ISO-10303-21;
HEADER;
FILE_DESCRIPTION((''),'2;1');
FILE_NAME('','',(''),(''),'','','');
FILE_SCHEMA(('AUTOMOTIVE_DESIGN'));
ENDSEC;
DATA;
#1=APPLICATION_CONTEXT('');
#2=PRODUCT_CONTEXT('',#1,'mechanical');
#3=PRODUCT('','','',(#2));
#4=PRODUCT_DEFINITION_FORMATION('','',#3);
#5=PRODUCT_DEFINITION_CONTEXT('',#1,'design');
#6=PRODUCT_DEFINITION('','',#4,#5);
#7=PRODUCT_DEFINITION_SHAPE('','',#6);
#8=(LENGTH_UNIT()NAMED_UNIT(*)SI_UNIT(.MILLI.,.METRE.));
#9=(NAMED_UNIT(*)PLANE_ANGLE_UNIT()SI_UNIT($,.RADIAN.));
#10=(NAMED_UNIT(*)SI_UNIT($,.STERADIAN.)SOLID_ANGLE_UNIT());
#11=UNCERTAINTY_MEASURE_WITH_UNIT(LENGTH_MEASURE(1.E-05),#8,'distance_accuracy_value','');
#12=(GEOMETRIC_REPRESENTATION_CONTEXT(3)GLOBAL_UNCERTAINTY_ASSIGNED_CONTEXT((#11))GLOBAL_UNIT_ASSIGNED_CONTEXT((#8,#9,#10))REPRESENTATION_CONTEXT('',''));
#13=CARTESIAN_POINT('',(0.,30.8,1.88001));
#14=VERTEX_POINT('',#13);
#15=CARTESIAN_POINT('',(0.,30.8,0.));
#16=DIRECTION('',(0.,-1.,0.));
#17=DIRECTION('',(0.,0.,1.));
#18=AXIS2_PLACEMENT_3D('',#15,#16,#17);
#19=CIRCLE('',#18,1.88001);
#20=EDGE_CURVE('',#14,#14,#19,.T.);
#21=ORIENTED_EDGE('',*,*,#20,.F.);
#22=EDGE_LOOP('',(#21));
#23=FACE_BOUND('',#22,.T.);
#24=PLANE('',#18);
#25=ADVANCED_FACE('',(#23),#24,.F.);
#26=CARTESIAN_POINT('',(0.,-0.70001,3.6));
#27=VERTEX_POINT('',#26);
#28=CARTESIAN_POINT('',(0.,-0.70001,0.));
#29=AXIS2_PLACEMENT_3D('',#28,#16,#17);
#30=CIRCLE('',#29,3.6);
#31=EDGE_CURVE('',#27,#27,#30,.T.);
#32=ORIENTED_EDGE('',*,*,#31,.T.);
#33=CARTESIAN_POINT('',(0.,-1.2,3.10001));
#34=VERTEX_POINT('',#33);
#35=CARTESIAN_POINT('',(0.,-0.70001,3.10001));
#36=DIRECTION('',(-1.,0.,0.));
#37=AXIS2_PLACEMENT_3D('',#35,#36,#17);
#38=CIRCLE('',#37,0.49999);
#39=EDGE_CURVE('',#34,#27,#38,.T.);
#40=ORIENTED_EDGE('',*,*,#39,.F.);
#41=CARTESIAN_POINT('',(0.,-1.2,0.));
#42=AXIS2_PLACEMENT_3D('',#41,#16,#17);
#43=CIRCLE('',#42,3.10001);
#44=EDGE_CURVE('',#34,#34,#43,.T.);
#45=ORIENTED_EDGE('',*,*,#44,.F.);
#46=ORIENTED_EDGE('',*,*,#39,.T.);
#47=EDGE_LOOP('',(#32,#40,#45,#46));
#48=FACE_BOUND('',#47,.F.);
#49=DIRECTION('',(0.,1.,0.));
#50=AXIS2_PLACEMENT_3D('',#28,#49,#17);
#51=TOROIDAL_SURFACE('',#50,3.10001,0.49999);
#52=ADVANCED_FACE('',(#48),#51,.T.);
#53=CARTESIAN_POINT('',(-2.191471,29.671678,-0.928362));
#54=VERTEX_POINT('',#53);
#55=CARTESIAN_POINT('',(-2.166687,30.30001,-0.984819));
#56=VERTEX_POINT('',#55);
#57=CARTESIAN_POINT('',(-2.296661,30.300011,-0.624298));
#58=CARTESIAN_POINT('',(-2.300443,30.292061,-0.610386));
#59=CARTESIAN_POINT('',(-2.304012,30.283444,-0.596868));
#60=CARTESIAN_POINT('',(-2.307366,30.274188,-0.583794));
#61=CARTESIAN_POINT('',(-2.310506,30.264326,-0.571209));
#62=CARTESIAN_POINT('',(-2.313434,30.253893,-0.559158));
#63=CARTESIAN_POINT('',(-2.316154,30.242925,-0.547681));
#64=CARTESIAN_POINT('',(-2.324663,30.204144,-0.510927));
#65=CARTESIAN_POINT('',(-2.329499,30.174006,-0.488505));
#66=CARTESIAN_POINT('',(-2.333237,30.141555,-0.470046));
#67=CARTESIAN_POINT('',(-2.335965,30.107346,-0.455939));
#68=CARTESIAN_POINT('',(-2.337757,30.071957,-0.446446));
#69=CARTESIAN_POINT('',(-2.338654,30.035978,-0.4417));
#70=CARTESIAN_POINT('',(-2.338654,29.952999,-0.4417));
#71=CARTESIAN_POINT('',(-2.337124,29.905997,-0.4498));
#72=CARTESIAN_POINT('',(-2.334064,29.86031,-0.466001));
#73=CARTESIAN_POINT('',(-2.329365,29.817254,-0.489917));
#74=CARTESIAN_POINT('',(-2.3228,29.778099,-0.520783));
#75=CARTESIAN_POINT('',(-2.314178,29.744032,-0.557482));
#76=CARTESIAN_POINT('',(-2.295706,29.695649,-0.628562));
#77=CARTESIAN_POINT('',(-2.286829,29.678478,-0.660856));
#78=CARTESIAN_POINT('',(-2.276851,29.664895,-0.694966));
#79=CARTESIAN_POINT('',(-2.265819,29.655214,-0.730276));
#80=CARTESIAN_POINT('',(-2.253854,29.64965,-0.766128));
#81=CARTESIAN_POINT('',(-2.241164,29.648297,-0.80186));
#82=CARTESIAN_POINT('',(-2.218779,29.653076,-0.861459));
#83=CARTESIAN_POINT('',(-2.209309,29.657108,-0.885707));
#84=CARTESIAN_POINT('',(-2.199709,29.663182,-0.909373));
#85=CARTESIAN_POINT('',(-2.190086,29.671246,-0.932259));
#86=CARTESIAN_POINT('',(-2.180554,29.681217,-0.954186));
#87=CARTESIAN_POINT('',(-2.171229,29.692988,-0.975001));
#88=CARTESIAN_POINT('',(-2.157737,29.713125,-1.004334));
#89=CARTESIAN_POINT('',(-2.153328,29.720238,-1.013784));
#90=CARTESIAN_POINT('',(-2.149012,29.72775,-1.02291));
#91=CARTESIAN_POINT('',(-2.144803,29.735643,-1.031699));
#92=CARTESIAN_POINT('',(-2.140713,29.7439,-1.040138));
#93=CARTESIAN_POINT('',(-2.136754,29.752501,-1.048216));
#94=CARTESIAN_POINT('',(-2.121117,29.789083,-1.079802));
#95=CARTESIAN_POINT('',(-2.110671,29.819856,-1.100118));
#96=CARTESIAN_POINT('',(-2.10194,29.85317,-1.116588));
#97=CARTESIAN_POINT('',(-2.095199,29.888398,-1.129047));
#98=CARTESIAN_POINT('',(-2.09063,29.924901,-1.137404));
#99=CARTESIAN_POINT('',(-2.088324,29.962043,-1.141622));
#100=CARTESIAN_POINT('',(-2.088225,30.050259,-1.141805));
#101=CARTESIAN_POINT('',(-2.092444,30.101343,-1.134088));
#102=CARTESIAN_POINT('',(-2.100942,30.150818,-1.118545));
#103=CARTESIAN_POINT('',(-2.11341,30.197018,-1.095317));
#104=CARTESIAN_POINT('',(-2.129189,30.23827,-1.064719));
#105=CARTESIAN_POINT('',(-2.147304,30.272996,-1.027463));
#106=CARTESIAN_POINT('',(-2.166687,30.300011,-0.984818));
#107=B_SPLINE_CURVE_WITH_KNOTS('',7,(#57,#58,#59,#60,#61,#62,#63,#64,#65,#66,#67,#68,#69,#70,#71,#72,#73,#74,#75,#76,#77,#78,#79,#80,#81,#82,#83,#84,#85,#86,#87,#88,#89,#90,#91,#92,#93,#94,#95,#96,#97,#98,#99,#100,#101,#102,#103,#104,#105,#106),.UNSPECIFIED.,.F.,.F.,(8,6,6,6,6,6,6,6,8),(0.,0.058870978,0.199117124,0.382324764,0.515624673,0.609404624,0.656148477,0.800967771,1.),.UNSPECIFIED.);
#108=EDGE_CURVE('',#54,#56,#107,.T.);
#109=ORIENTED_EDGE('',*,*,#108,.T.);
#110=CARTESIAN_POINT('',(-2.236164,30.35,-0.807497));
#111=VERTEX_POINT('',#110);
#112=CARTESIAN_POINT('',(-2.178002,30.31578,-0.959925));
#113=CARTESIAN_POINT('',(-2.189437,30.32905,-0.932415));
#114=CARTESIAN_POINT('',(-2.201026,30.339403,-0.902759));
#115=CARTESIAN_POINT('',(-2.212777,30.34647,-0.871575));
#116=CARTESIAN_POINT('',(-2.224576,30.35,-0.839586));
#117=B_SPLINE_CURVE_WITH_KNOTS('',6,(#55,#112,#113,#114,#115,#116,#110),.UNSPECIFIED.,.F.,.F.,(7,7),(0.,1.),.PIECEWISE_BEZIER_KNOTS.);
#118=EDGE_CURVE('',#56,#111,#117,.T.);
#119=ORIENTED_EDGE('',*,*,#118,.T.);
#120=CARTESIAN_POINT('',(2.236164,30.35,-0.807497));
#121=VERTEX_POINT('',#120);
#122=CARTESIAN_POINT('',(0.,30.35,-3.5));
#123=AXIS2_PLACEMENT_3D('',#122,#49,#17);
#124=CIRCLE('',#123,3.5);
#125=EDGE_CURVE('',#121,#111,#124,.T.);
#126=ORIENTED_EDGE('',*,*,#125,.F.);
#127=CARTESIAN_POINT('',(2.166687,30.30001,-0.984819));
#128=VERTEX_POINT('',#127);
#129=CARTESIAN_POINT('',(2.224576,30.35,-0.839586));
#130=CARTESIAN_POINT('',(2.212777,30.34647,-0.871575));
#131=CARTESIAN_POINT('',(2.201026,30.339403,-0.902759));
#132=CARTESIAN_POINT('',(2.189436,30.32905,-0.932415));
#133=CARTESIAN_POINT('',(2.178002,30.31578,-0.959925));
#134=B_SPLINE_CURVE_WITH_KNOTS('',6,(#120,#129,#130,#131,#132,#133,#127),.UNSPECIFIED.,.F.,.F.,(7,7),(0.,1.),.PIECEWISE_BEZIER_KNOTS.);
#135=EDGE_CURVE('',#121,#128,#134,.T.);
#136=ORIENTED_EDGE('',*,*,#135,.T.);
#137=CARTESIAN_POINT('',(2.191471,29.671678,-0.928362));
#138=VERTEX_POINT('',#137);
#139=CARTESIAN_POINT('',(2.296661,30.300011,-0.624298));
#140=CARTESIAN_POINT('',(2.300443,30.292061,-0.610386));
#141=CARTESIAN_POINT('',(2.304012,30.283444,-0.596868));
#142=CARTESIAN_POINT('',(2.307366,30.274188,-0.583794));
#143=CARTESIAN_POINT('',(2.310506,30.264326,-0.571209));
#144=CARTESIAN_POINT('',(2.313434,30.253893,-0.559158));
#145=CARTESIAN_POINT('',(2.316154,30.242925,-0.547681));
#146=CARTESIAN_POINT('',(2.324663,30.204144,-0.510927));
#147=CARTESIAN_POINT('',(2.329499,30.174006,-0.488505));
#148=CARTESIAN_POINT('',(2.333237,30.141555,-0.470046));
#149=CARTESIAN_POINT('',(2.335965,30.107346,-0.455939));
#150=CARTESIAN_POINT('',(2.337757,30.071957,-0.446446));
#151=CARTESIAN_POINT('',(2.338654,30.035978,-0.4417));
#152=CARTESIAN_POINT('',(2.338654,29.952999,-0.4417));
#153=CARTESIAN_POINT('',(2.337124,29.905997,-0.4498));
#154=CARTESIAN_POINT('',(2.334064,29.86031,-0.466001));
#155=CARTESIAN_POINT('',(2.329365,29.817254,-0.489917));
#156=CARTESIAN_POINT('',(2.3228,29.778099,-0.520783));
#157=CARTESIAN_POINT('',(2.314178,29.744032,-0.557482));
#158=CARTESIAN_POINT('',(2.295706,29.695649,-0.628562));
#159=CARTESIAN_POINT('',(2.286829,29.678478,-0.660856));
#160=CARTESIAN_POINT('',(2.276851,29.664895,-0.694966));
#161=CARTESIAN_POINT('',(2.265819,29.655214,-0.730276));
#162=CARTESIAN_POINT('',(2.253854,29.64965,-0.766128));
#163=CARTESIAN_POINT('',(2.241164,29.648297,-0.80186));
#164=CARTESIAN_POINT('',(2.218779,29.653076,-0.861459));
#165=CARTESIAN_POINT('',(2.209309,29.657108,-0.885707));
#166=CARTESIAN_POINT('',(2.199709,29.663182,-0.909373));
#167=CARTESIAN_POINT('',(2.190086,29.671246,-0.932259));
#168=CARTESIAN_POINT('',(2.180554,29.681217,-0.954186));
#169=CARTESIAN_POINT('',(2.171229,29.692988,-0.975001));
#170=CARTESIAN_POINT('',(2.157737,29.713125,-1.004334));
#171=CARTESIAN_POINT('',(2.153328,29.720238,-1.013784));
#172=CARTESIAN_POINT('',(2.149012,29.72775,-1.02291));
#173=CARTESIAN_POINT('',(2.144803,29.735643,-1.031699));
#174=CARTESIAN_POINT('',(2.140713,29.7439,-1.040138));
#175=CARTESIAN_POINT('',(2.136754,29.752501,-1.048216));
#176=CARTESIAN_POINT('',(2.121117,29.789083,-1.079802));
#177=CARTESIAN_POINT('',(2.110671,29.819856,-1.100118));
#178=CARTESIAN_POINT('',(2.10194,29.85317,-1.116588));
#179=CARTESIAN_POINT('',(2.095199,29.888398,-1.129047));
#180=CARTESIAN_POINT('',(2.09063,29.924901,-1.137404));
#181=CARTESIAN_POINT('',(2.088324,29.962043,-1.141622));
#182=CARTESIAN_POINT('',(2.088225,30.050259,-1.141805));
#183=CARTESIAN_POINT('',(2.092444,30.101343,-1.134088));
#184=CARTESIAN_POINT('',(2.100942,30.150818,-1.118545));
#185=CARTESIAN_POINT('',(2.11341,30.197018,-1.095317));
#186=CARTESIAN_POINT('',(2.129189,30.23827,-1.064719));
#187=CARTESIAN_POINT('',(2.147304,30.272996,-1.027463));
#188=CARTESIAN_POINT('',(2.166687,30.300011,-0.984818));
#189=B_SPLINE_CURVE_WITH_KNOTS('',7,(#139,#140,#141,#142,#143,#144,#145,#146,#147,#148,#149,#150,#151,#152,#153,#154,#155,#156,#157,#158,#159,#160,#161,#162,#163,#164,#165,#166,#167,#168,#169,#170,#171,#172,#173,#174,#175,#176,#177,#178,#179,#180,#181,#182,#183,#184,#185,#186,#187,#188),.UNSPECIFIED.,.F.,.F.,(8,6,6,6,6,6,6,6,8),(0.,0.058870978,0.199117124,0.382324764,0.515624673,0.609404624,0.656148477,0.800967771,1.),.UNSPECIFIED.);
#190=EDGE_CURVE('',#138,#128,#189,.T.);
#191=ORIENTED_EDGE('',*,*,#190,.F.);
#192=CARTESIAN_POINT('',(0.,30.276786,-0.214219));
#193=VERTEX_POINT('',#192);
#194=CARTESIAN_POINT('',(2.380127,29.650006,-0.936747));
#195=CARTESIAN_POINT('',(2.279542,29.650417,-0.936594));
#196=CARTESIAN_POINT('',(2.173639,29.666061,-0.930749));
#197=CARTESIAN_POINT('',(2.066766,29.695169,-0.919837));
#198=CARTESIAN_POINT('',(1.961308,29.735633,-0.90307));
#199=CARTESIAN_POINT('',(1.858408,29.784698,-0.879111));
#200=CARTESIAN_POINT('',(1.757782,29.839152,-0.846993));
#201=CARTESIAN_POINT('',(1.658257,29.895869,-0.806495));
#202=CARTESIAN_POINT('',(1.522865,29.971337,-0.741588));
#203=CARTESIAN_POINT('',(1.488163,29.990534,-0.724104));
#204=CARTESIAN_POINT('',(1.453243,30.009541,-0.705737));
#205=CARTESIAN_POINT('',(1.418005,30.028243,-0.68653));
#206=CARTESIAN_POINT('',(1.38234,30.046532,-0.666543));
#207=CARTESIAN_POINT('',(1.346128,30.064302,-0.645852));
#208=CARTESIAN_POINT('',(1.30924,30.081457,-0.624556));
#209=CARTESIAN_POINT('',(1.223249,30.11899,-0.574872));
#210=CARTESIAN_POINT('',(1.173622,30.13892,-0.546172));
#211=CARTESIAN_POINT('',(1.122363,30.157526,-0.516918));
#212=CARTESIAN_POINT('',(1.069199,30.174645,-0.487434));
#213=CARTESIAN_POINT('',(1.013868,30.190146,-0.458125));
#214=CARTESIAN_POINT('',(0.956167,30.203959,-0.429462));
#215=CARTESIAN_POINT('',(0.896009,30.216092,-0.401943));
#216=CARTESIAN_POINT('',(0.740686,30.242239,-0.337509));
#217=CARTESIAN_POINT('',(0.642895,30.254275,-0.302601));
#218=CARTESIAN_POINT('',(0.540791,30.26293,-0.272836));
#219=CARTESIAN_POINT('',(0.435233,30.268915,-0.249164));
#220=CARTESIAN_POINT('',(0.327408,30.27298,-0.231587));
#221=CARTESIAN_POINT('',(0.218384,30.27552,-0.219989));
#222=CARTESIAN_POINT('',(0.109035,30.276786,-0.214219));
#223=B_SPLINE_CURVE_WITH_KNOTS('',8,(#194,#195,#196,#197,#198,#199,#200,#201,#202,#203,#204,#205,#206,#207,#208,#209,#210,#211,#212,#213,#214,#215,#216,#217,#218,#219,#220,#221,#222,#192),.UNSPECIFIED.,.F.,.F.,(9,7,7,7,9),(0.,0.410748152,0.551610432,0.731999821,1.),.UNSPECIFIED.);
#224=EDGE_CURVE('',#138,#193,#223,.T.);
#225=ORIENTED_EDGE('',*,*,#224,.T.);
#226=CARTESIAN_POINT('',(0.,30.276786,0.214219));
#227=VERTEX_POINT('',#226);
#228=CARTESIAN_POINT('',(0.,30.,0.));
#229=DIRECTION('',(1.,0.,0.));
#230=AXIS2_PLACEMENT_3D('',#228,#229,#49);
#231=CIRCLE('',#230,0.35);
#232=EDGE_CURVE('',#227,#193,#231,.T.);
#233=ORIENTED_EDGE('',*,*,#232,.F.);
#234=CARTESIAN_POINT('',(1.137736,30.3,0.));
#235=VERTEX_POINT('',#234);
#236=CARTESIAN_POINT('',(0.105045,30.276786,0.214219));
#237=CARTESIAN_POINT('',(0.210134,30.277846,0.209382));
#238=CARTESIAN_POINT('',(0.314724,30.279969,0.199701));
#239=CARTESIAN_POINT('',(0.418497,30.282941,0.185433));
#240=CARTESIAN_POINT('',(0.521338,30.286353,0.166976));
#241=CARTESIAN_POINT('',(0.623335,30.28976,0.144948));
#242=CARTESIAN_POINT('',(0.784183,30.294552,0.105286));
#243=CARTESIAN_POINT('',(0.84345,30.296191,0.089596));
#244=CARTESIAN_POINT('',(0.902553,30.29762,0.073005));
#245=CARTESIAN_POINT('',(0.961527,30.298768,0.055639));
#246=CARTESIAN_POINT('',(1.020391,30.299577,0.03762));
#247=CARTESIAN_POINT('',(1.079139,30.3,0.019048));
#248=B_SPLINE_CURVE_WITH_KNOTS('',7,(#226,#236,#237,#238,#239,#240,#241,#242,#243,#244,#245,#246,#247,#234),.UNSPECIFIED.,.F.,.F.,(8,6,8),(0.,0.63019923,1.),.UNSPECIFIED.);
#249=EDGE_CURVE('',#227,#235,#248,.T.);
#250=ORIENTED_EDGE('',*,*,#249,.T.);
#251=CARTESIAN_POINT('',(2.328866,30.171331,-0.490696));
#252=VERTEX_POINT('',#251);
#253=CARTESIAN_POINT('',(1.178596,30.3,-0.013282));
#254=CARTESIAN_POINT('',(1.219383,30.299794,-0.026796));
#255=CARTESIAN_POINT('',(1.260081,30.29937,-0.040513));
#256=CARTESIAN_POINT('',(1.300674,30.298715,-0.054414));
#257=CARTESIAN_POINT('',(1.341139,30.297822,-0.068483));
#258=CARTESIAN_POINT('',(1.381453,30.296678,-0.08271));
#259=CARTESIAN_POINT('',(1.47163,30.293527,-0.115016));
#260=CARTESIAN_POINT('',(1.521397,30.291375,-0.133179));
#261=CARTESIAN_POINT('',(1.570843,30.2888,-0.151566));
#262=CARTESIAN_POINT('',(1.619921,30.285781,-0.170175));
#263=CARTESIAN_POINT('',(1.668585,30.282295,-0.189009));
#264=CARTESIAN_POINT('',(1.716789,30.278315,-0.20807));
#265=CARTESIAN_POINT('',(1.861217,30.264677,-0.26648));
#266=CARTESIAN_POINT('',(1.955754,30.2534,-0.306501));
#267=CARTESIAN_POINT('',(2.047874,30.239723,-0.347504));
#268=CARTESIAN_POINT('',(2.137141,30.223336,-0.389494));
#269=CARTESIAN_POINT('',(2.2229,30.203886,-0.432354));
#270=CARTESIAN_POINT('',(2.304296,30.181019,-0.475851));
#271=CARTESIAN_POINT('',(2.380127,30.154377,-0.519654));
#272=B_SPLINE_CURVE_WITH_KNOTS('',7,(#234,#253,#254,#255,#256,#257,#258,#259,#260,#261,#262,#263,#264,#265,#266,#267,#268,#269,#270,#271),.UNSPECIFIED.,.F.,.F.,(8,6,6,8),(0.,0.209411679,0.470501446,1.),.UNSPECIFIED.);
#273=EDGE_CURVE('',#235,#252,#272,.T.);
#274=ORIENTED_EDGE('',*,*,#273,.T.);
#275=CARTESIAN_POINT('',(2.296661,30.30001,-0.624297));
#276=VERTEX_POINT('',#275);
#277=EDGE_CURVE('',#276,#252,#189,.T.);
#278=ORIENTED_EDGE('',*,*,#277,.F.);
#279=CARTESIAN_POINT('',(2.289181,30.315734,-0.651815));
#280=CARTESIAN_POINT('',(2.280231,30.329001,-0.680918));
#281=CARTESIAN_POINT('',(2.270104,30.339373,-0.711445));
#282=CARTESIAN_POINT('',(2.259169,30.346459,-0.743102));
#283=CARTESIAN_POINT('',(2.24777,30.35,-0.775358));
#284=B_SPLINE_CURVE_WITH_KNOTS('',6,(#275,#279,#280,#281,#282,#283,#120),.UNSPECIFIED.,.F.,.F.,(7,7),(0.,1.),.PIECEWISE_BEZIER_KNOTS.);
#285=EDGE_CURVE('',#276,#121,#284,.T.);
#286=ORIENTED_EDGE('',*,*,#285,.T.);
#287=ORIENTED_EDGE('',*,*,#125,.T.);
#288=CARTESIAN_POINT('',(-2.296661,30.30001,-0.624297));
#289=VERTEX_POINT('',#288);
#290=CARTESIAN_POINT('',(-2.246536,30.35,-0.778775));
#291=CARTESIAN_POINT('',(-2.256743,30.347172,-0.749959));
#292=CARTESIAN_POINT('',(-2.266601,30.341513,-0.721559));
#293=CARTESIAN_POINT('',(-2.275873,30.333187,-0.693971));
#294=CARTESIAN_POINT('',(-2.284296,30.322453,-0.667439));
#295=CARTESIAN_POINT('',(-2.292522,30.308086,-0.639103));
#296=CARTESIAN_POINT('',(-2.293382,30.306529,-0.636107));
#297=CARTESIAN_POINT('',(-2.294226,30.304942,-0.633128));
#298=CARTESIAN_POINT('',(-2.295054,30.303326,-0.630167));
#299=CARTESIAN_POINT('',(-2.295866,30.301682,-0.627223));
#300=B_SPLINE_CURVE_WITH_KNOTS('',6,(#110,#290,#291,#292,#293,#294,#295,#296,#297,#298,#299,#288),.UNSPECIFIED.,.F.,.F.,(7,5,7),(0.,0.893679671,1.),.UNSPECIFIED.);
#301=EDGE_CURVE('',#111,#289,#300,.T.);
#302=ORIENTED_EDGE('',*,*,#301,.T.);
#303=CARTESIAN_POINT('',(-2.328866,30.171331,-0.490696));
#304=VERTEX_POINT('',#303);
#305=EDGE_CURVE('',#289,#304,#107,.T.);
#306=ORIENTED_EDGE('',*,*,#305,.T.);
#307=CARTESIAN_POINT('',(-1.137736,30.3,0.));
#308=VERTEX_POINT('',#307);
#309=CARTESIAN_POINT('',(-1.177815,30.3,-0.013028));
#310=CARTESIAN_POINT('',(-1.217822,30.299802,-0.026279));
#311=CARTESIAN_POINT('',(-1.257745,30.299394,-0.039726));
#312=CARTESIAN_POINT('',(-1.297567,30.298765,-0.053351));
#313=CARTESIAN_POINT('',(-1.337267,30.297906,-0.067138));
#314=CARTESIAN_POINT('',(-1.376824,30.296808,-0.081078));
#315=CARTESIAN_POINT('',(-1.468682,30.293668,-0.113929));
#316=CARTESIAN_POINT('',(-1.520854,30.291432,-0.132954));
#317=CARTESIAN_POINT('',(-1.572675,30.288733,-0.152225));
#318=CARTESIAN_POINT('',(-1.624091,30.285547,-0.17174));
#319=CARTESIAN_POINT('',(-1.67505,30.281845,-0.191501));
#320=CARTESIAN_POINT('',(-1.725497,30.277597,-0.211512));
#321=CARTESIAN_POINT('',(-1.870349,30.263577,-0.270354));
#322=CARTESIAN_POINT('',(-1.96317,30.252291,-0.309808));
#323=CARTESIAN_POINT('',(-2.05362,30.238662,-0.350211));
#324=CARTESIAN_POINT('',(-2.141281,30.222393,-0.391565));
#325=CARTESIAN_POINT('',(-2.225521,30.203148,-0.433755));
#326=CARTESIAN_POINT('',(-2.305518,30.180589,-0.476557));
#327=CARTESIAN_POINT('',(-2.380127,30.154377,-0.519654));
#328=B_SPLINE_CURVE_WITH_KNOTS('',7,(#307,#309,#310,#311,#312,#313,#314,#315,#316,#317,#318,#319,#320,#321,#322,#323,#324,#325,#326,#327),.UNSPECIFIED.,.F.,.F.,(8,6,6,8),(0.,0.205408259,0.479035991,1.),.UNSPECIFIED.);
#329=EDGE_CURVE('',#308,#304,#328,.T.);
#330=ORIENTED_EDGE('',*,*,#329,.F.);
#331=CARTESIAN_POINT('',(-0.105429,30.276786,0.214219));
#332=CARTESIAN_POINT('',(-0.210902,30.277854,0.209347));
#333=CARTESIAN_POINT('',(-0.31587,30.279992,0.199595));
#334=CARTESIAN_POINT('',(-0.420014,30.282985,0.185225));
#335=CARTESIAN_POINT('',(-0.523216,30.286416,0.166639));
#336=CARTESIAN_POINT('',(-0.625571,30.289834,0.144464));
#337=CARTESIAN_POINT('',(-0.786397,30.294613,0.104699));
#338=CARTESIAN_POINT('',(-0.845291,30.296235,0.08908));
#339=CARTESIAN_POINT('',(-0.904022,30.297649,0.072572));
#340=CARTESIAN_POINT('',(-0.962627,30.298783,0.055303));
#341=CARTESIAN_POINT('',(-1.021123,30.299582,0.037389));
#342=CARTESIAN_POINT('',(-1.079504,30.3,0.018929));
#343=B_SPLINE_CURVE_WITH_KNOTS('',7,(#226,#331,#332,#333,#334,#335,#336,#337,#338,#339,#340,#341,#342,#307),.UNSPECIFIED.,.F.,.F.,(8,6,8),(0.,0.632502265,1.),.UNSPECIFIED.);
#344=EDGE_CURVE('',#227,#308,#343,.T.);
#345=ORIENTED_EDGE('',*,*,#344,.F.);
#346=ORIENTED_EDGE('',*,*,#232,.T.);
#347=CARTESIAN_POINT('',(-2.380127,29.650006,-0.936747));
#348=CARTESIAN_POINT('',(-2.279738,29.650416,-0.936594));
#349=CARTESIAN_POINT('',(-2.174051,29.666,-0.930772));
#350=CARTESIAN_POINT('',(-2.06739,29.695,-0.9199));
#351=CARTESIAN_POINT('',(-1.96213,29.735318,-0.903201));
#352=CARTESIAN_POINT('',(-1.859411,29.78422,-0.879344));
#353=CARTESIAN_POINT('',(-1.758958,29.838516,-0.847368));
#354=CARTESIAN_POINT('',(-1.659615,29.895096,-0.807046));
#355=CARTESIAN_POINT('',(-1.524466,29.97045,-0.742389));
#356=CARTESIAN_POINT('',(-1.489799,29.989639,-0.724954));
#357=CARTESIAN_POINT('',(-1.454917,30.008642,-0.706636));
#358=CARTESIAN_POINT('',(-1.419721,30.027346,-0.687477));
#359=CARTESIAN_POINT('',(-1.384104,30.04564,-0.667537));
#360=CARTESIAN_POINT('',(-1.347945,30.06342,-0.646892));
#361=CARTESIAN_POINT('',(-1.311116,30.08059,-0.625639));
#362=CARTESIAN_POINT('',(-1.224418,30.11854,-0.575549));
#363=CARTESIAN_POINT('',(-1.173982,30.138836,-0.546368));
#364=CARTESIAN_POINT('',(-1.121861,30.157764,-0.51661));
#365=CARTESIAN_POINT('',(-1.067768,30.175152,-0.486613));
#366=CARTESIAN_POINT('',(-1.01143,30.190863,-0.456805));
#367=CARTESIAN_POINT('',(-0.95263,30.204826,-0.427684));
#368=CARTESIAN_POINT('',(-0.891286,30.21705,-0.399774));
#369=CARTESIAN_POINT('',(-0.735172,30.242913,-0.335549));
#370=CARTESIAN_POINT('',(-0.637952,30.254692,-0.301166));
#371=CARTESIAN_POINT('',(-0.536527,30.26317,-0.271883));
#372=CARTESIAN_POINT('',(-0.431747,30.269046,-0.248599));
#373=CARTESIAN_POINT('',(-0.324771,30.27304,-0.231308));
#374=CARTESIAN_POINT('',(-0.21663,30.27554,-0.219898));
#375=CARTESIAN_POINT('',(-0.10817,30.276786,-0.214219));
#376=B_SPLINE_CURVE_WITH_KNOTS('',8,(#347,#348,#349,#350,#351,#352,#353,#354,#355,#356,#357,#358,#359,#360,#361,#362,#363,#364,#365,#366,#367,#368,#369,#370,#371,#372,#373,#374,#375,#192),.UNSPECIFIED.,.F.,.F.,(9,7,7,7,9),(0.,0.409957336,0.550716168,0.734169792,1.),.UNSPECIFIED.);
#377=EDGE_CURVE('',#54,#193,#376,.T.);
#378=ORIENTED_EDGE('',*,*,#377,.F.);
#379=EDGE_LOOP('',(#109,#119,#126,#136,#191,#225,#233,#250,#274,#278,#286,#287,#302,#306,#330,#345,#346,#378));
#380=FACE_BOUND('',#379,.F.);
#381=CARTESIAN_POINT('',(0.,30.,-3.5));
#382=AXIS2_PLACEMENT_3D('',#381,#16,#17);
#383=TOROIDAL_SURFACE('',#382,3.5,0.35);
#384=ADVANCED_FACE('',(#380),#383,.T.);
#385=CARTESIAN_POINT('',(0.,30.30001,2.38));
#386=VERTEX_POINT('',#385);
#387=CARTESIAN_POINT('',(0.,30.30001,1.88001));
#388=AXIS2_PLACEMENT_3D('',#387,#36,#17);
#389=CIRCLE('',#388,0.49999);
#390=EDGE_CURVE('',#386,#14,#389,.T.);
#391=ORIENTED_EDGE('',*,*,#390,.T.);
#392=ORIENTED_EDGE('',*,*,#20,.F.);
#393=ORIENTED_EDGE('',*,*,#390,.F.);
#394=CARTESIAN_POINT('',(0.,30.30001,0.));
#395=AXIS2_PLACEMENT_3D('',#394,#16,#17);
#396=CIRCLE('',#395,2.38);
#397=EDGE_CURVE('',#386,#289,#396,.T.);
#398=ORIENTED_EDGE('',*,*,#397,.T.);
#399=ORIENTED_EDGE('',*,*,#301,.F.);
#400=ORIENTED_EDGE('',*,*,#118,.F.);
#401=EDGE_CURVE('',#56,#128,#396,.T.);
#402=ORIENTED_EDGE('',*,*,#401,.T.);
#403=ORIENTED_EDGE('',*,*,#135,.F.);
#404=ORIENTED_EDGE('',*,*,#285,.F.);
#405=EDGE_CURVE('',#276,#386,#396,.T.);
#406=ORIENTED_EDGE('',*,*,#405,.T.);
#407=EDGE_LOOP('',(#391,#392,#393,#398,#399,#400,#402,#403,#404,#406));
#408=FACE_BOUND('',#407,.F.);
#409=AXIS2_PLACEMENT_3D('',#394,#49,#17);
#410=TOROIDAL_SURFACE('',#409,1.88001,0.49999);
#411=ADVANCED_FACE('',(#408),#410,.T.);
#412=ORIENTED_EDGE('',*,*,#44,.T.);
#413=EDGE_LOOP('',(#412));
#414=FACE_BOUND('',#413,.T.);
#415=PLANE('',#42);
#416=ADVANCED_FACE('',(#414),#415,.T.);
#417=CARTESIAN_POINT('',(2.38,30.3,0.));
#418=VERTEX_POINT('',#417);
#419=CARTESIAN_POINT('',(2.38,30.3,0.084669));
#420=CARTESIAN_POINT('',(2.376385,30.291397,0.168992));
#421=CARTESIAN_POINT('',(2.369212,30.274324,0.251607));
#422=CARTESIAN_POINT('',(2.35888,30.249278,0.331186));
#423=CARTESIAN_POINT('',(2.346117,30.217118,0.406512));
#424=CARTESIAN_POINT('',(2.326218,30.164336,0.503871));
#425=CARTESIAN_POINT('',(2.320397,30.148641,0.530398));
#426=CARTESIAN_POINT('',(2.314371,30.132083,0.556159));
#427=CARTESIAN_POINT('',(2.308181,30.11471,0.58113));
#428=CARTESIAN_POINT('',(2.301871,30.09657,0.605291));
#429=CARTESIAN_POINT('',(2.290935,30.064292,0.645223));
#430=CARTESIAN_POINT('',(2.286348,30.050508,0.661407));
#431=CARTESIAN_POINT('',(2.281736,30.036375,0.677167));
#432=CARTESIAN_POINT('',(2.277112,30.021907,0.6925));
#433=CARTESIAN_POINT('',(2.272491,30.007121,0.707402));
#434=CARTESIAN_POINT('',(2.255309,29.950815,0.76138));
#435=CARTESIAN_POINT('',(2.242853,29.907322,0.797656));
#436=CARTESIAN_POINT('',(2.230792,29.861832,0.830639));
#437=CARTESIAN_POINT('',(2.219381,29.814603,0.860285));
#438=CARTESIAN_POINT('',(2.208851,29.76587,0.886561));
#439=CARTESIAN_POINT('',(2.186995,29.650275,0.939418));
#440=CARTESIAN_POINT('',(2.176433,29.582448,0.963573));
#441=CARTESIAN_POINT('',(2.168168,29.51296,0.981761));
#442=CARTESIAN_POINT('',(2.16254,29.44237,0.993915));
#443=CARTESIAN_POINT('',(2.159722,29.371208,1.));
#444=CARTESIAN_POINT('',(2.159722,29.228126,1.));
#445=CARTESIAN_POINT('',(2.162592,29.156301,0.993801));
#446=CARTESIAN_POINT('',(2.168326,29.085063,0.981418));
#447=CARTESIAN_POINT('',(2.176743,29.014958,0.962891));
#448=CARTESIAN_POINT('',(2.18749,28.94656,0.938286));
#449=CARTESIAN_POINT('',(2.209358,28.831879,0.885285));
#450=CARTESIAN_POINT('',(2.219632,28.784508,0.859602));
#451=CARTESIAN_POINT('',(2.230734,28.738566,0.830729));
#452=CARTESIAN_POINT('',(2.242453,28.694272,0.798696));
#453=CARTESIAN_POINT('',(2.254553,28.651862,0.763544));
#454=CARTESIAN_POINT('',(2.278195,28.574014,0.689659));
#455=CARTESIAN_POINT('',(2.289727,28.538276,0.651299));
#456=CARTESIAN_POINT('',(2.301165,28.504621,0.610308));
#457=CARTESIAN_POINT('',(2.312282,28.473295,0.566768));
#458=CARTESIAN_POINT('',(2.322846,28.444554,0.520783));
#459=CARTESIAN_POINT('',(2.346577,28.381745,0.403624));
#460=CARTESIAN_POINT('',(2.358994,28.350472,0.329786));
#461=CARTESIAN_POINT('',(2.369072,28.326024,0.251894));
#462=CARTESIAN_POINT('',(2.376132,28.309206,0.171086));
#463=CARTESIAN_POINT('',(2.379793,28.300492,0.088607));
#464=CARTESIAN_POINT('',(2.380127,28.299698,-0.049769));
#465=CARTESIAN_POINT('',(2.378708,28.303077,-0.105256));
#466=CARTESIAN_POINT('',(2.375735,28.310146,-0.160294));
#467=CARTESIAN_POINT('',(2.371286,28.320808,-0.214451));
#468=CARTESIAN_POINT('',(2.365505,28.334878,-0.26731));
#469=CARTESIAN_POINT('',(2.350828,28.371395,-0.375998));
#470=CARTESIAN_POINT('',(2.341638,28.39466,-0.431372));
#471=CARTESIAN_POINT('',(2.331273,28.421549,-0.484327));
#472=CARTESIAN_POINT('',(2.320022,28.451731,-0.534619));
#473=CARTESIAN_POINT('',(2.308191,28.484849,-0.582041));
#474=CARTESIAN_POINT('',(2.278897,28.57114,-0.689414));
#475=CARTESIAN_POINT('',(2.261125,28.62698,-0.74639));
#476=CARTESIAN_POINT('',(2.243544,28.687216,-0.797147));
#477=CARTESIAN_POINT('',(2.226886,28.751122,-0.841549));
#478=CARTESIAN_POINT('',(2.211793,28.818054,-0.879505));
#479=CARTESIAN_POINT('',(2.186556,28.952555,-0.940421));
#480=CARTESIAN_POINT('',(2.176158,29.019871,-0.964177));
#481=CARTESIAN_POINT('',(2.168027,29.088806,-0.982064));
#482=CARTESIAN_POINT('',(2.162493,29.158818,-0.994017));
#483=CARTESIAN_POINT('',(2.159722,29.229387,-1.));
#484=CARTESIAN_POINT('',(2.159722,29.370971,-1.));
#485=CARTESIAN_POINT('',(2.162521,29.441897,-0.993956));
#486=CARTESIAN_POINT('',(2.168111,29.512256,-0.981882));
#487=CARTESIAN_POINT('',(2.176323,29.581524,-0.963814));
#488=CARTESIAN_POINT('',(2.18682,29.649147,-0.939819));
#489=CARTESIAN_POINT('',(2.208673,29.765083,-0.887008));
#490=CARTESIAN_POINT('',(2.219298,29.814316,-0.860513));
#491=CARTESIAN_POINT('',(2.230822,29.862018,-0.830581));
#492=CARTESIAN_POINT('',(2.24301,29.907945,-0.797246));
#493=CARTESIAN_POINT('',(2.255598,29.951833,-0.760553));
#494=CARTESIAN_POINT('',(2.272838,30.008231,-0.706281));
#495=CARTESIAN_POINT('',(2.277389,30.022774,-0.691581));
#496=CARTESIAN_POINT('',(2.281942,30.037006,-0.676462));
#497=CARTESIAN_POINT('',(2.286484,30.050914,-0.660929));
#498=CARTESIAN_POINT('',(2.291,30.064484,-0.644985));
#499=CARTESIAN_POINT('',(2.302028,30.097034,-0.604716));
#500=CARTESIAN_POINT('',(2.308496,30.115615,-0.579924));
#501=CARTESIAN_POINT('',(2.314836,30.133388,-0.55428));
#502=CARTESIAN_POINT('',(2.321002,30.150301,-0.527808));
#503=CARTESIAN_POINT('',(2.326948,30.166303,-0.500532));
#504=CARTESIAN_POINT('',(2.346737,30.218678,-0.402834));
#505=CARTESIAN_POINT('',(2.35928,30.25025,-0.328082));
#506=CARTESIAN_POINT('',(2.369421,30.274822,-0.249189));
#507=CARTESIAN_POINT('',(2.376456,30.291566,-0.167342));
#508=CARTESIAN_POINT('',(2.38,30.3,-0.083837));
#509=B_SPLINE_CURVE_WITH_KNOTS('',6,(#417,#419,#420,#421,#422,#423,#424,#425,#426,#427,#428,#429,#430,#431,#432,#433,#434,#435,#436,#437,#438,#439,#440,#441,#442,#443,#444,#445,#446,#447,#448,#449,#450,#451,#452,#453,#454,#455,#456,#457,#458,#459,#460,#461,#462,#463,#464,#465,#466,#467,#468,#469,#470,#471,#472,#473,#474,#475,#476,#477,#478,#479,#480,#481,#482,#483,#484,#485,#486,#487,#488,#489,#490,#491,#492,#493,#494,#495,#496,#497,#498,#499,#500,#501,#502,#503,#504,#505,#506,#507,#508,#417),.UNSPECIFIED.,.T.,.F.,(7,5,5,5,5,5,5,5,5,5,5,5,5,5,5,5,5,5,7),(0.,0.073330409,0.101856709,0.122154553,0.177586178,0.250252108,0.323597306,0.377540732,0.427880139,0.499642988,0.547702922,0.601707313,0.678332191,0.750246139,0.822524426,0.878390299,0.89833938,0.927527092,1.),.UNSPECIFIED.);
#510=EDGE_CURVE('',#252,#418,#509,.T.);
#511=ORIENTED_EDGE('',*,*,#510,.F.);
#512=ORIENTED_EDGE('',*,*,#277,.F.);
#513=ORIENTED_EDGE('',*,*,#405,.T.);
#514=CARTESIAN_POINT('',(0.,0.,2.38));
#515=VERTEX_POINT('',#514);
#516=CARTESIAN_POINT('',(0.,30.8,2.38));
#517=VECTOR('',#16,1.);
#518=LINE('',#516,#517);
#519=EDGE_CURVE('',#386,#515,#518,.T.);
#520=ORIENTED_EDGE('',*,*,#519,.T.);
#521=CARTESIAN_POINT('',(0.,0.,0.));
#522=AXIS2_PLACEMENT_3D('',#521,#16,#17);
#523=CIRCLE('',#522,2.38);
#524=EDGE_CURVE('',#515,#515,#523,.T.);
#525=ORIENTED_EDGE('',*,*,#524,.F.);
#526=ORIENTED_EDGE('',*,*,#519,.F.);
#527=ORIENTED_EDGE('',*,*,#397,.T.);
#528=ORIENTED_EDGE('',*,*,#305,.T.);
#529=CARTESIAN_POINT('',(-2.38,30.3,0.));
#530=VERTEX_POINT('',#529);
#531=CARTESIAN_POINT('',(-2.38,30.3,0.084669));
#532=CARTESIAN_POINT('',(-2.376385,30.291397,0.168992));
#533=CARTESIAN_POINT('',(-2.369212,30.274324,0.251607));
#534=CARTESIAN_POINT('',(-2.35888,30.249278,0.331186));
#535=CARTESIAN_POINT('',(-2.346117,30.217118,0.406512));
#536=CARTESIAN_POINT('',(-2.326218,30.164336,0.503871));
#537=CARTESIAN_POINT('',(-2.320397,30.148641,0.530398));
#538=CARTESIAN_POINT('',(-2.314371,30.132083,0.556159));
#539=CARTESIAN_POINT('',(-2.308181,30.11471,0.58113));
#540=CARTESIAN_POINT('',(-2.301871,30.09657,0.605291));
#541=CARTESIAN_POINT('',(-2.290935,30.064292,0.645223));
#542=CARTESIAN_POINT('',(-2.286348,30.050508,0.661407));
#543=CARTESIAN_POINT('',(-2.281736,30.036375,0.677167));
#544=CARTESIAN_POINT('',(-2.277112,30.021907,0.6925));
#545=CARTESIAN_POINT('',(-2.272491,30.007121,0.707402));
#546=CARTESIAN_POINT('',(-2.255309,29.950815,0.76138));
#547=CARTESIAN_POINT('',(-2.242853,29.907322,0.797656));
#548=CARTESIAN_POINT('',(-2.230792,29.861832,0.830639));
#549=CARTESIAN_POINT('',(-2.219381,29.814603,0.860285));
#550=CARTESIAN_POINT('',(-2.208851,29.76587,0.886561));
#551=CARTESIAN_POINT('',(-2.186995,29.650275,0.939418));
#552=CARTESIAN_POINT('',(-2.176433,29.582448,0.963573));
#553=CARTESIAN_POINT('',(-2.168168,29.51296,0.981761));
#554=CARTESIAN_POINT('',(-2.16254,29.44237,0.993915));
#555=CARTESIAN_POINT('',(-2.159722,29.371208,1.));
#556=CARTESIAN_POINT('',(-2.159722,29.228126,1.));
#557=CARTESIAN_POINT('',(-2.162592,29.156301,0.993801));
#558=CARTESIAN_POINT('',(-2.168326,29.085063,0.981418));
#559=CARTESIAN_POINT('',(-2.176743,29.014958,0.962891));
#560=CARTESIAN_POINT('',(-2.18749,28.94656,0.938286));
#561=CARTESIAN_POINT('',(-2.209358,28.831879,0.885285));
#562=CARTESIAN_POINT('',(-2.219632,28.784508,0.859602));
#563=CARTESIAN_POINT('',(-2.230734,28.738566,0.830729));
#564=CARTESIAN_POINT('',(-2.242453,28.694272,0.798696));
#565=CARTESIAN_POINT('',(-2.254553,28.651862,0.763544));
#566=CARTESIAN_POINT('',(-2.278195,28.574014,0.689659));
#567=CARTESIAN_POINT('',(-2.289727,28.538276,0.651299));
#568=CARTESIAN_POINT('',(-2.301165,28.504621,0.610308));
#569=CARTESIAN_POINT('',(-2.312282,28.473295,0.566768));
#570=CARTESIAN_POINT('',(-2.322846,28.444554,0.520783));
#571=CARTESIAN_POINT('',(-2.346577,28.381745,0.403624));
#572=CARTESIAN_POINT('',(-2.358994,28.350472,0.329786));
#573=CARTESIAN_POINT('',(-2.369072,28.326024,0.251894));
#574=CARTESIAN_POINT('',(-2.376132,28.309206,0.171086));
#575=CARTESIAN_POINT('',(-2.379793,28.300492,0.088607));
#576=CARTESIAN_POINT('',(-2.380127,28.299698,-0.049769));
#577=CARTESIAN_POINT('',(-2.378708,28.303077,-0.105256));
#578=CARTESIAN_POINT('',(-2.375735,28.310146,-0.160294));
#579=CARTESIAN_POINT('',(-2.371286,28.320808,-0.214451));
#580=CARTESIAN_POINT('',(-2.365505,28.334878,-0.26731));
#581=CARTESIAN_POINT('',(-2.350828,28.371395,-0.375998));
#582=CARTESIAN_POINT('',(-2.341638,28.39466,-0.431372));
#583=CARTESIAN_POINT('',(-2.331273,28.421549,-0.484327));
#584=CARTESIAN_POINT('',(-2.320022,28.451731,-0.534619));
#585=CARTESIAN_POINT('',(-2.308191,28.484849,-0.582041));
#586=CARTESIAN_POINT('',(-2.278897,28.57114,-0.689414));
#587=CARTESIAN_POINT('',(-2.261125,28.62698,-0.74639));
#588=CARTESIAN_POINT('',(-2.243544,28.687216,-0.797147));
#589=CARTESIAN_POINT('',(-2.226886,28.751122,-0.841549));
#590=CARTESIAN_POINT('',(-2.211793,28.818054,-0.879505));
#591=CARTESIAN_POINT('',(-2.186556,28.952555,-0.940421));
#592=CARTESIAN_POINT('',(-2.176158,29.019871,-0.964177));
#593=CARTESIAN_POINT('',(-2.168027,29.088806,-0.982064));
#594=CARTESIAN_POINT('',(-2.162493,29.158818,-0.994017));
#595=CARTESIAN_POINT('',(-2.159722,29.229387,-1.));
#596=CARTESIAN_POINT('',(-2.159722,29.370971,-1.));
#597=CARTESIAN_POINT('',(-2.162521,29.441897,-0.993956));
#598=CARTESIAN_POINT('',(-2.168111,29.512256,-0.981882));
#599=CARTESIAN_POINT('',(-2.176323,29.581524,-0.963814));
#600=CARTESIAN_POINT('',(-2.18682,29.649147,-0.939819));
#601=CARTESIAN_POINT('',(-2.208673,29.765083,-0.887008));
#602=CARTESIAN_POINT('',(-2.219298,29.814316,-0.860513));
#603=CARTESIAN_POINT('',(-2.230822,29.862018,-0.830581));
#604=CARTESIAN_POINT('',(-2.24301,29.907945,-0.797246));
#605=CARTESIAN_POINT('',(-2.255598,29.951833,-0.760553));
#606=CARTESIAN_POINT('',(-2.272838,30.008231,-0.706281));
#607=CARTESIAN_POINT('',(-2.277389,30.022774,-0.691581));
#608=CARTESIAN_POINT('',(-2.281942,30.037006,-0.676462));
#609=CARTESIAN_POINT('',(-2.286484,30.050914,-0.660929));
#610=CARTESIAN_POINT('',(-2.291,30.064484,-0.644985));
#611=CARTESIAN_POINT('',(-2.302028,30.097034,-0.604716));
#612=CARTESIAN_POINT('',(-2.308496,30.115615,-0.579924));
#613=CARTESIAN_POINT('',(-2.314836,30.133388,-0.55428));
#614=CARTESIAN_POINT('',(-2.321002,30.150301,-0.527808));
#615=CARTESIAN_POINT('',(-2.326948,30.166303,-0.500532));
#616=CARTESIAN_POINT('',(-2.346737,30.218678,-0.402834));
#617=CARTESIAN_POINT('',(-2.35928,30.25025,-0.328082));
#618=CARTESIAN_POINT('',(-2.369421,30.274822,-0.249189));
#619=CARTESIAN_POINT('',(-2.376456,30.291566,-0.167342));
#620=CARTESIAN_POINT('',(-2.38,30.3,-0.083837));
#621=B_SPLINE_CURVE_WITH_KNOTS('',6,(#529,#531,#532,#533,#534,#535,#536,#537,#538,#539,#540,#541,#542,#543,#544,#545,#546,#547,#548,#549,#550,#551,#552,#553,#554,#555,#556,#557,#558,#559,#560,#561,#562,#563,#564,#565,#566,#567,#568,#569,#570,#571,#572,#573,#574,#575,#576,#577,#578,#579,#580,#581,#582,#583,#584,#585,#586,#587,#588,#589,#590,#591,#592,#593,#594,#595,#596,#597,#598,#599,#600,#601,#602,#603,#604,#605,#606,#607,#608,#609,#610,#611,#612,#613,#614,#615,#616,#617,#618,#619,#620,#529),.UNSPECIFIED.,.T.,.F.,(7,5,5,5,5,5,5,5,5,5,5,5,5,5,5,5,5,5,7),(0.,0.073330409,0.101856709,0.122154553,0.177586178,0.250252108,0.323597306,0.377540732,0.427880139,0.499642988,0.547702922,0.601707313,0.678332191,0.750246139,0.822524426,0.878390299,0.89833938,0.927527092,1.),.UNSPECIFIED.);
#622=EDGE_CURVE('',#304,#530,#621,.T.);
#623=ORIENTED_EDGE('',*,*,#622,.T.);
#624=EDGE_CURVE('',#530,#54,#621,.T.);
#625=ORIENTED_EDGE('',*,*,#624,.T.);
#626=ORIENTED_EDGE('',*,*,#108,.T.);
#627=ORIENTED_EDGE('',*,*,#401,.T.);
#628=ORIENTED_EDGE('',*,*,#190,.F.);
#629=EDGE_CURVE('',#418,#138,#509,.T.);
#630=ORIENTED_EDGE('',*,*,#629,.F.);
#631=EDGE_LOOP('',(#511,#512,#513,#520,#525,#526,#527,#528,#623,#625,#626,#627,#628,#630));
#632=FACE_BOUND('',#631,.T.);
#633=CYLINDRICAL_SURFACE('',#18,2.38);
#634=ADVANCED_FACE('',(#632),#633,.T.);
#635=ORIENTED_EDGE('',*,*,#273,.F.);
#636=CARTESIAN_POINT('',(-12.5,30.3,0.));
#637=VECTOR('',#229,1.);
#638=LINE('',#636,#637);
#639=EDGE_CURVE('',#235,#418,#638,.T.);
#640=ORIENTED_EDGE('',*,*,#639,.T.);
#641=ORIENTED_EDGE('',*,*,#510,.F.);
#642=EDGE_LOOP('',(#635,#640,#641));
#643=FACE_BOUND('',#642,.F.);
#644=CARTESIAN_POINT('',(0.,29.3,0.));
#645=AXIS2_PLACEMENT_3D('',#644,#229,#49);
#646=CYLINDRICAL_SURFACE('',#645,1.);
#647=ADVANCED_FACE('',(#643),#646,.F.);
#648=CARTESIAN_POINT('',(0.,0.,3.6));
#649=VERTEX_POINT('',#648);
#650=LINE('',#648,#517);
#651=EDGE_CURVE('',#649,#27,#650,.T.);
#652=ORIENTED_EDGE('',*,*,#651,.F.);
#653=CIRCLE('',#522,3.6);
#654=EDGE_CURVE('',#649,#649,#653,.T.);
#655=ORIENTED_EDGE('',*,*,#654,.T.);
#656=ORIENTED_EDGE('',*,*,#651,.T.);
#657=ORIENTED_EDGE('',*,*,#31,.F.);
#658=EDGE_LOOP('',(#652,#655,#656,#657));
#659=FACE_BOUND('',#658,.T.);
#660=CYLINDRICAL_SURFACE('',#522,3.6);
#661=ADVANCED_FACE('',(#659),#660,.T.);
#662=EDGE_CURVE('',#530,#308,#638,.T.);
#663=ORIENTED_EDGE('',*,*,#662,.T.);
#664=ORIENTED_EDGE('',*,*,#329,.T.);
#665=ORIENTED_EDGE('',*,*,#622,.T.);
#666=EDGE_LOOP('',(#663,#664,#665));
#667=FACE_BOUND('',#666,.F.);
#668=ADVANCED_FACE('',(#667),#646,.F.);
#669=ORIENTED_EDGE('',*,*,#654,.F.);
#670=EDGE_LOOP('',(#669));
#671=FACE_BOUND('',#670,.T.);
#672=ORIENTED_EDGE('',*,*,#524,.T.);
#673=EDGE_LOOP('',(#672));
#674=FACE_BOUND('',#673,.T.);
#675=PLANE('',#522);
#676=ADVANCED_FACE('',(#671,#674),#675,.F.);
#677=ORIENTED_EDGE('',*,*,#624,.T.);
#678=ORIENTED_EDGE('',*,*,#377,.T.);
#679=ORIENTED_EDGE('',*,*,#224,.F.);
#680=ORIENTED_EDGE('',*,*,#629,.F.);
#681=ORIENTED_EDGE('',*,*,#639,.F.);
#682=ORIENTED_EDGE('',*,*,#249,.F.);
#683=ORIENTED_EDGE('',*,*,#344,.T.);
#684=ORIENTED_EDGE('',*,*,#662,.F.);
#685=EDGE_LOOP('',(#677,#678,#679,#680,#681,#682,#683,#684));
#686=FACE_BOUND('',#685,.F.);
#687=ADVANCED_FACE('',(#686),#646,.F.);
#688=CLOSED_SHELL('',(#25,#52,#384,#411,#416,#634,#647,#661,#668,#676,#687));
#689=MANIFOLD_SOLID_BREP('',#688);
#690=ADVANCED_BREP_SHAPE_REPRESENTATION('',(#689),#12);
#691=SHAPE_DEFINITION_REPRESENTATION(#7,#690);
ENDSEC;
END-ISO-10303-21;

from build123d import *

# Parameters (mm, degrees)
F2_R     = 1
F3_DEPTH = 12.5
F4_R     = 0.49999
F5_R     = 0.35


# Not quite as in the source:
# - a fillet or chamfer is up to 0.001 mm smaller than in the source, because OpenCascade refuses the exact size


with BuildPart() as f1:
    # F0 (on Right) → F1 (revolve)
    with BuildSketch(Plane.YZ):
        Polygon((-1.2, 3.6), (-1.2, 0), (30.8, 0), (30.8, 2.38), (0, 2.38), (0, 3.6), align=None)
    revolve(axis=Axis((0, 14.8, 0), (0, -1, 0)))

    # F2 (on Right) → F3 (cut, symmetric)
    with BuildSketch(Plane.YZ):
        with Locations((29.3, 0)):
            Circle(F2_R)
    extrude(amount=F3_DEPTH, both=True, mode=Mode.SUBTRACT)

    # F4 (radius 0.5 in the source; OpenCascade refuses exactly that, so slightly less here)
    f4_edges = [f1.edges().sort_by_distance(p)[0] for p in [
        (0, -1.2, -3.6),
        (0, 30.8, -2.38),
    ]]
    fillet(f4_edges, radius=F4_R)

    # F5 (on Right) → F6 (revolve)
    with BuildSketch(Plane.YZ):
        with Locations((30, 0)):
            Circle(F5_R)
    revolve(axis=Axis((0, 28.3114453778, -3.5), (0, 1, 0)))


solid = f1.part
